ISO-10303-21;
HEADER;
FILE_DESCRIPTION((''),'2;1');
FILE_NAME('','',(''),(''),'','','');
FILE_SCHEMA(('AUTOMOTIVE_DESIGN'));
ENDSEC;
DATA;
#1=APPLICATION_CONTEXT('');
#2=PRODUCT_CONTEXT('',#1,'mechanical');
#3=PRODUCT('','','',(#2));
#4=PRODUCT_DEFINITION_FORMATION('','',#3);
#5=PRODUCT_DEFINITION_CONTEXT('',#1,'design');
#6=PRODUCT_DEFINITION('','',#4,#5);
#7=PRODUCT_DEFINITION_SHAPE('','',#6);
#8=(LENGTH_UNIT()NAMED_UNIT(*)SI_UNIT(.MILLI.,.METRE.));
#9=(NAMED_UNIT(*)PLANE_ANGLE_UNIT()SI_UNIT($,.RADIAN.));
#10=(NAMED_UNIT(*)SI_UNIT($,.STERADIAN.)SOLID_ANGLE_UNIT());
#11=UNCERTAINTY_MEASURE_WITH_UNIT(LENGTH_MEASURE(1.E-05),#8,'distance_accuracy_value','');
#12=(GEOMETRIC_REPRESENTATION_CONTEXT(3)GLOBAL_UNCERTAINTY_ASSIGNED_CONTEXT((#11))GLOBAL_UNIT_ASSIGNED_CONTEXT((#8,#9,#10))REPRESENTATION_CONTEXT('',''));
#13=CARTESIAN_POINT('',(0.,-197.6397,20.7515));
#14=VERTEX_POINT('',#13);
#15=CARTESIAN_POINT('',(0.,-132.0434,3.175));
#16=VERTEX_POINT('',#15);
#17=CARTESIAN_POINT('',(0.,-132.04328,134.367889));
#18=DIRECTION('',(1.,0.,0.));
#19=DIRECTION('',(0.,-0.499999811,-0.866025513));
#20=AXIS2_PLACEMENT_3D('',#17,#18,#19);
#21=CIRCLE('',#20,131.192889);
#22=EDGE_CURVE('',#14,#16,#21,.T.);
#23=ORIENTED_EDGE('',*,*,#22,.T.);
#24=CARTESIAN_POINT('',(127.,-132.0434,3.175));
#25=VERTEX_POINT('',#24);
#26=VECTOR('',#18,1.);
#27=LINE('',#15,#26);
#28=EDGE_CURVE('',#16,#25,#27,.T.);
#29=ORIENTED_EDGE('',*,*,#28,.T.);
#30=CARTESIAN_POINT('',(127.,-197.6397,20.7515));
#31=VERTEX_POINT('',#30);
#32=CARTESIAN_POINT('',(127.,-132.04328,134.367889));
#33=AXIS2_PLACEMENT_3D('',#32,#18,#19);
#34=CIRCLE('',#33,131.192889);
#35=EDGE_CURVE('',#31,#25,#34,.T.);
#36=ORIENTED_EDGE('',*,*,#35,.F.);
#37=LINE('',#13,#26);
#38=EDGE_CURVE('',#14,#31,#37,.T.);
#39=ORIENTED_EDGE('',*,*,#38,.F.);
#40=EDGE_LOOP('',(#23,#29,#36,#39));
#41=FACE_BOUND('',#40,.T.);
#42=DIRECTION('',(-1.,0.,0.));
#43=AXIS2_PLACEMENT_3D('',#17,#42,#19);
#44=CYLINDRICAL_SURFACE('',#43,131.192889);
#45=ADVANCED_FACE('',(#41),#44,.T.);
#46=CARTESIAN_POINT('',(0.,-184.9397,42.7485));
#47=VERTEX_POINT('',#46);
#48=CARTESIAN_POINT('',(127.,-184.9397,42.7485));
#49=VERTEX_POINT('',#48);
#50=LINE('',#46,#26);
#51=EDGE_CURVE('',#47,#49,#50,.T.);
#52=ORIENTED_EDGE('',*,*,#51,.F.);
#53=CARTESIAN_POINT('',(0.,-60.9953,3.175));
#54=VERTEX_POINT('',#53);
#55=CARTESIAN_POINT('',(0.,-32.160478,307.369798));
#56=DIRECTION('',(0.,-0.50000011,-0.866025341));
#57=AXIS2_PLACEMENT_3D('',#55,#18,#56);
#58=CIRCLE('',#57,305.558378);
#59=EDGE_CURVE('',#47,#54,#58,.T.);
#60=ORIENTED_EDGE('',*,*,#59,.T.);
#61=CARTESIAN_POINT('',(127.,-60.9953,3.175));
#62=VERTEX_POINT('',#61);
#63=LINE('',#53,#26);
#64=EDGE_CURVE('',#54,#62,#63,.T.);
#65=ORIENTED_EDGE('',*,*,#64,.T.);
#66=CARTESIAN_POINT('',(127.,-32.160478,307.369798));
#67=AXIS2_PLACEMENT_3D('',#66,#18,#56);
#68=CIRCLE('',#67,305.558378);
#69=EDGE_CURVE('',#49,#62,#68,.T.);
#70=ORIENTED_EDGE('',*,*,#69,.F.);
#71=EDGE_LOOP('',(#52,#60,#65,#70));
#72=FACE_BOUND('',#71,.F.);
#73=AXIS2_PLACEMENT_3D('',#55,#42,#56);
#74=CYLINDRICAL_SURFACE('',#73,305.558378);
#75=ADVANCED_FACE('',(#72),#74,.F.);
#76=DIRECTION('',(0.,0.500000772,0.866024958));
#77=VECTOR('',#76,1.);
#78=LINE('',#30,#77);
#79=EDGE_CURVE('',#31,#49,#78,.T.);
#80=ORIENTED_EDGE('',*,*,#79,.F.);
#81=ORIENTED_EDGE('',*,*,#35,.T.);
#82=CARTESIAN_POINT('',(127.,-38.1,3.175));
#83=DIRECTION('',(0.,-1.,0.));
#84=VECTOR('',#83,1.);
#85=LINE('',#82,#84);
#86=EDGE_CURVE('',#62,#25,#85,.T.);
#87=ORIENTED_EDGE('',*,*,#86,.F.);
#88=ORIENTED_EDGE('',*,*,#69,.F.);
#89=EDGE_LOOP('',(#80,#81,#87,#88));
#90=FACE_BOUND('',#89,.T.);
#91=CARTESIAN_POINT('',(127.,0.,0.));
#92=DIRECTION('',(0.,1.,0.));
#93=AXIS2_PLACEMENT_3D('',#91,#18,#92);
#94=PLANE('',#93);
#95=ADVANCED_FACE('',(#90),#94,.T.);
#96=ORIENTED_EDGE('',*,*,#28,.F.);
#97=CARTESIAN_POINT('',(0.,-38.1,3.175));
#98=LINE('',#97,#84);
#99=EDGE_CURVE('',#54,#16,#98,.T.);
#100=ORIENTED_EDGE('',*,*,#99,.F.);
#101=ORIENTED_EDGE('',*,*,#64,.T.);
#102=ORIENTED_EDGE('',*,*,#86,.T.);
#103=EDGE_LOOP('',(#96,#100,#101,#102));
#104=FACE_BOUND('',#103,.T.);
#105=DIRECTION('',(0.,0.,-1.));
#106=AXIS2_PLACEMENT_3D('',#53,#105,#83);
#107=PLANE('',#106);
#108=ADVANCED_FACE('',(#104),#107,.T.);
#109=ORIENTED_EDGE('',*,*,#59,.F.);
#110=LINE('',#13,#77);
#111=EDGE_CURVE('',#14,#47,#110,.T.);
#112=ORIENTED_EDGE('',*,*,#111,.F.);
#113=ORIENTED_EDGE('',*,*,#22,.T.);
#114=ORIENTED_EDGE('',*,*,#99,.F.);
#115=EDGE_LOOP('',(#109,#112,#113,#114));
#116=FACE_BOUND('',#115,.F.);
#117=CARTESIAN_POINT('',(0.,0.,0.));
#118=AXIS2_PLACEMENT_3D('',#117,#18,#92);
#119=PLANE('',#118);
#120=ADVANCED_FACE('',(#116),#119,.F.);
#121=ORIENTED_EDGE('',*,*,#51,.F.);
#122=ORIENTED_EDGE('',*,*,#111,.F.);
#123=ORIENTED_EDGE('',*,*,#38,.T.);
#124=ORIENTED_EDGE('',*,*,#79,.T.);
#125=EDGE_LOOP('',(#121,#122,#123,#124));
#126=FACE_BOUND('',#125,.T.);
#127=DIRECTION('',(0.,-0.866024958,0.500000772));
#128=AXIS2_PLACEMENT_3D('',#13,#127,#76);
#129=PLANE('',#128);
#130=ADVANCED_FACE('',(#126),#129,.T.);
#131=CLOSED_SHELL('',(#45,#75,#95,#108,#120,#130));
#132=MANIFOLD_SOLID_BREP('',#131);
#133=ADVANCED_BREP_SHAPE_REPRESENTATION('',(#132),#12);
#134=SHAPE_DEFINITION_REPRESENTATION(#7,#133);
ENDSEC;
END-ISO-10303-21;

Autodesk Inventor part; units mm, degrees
ref_plane "YZ Plane" through (0, 0, 0) normal (1, 0, 0) x (0, 1, 0)
ref_plane "XZ Plane" through (0, 0, 0) normal (0, 1, 0) x (-1, 0, 0)
ref_plane "XY Plane" through (0, 0, 0) normal (0, 0, 1) x (1, 0, 0)
sketch "Sketch1" plane through (0, 0, 0) normal (1, 0, 0) x (0, 1, 0)
  line L0 (-219.6367, 33.4515) -> (-197.6397, 20.7515)
  line L1 (-197.6397, 20.7515) -> (-184.9397, 42.7485)
  line L2 (-184.9397, 42.7485) -> (-206.9367, 55.4485)
  line L3 (-206.9367, 55.4485) -> (-219.6367, 33.4515)
  line L4 (-219.6367, 33.4515) -> (-184.9397, 42.7485) construction
  line L5 (-197.6397, 20.7515) -> (-206.9367, 55.4485) construction
  circle A0 centre (-38.1, 41.275) radius 38.1
  line L6 (0, 0) -> (-228.6, 0)
  line L7 (-228.6, 0) -> (-228.6, -25.4)
  line L8 (-228.6, -25.4) -> (0, -25.4)
  line L9 (0, -25.4) -> (0, 0)
  line L10 (0, 0) -> (-228.6, -25.4) construction
  line L11 (-228.6, 0) -> (0, -25.4) construction
  line L12 (-38.1, 3.175) -> (-132.0434, 3.175)
  arc A1 (-197.6397, 20.7515) -> (-132.0434, 3.175) centre (-132.0434, 134.3676) ccw
  arc A2 (-184.9397, 42.7485) -> (-60.9953, 3.175) centre (-32.1603, 307.3702) ccw
  circle A3 centre (-38.1, 41.275) radius 44.45
  point P0 (-202.2882, 38.1)
  point P1 (-114.3, -12.7)
  dimension "d0" = 76.2
  dimension "d8" = 88.9
  dimension "d1" = 25.4
  dimension "d2" = 60
  dimension "d3" = 41.275
  dimension "d4" = 38.1
  dimension "d5" = 146.847
  dimension "d6" = 20.7515
  dimension "d7" = 228.6
extrude "Extrusion1" add sketch "Sketch1" along normal blind 127 contours L1 A2 L12 A1
